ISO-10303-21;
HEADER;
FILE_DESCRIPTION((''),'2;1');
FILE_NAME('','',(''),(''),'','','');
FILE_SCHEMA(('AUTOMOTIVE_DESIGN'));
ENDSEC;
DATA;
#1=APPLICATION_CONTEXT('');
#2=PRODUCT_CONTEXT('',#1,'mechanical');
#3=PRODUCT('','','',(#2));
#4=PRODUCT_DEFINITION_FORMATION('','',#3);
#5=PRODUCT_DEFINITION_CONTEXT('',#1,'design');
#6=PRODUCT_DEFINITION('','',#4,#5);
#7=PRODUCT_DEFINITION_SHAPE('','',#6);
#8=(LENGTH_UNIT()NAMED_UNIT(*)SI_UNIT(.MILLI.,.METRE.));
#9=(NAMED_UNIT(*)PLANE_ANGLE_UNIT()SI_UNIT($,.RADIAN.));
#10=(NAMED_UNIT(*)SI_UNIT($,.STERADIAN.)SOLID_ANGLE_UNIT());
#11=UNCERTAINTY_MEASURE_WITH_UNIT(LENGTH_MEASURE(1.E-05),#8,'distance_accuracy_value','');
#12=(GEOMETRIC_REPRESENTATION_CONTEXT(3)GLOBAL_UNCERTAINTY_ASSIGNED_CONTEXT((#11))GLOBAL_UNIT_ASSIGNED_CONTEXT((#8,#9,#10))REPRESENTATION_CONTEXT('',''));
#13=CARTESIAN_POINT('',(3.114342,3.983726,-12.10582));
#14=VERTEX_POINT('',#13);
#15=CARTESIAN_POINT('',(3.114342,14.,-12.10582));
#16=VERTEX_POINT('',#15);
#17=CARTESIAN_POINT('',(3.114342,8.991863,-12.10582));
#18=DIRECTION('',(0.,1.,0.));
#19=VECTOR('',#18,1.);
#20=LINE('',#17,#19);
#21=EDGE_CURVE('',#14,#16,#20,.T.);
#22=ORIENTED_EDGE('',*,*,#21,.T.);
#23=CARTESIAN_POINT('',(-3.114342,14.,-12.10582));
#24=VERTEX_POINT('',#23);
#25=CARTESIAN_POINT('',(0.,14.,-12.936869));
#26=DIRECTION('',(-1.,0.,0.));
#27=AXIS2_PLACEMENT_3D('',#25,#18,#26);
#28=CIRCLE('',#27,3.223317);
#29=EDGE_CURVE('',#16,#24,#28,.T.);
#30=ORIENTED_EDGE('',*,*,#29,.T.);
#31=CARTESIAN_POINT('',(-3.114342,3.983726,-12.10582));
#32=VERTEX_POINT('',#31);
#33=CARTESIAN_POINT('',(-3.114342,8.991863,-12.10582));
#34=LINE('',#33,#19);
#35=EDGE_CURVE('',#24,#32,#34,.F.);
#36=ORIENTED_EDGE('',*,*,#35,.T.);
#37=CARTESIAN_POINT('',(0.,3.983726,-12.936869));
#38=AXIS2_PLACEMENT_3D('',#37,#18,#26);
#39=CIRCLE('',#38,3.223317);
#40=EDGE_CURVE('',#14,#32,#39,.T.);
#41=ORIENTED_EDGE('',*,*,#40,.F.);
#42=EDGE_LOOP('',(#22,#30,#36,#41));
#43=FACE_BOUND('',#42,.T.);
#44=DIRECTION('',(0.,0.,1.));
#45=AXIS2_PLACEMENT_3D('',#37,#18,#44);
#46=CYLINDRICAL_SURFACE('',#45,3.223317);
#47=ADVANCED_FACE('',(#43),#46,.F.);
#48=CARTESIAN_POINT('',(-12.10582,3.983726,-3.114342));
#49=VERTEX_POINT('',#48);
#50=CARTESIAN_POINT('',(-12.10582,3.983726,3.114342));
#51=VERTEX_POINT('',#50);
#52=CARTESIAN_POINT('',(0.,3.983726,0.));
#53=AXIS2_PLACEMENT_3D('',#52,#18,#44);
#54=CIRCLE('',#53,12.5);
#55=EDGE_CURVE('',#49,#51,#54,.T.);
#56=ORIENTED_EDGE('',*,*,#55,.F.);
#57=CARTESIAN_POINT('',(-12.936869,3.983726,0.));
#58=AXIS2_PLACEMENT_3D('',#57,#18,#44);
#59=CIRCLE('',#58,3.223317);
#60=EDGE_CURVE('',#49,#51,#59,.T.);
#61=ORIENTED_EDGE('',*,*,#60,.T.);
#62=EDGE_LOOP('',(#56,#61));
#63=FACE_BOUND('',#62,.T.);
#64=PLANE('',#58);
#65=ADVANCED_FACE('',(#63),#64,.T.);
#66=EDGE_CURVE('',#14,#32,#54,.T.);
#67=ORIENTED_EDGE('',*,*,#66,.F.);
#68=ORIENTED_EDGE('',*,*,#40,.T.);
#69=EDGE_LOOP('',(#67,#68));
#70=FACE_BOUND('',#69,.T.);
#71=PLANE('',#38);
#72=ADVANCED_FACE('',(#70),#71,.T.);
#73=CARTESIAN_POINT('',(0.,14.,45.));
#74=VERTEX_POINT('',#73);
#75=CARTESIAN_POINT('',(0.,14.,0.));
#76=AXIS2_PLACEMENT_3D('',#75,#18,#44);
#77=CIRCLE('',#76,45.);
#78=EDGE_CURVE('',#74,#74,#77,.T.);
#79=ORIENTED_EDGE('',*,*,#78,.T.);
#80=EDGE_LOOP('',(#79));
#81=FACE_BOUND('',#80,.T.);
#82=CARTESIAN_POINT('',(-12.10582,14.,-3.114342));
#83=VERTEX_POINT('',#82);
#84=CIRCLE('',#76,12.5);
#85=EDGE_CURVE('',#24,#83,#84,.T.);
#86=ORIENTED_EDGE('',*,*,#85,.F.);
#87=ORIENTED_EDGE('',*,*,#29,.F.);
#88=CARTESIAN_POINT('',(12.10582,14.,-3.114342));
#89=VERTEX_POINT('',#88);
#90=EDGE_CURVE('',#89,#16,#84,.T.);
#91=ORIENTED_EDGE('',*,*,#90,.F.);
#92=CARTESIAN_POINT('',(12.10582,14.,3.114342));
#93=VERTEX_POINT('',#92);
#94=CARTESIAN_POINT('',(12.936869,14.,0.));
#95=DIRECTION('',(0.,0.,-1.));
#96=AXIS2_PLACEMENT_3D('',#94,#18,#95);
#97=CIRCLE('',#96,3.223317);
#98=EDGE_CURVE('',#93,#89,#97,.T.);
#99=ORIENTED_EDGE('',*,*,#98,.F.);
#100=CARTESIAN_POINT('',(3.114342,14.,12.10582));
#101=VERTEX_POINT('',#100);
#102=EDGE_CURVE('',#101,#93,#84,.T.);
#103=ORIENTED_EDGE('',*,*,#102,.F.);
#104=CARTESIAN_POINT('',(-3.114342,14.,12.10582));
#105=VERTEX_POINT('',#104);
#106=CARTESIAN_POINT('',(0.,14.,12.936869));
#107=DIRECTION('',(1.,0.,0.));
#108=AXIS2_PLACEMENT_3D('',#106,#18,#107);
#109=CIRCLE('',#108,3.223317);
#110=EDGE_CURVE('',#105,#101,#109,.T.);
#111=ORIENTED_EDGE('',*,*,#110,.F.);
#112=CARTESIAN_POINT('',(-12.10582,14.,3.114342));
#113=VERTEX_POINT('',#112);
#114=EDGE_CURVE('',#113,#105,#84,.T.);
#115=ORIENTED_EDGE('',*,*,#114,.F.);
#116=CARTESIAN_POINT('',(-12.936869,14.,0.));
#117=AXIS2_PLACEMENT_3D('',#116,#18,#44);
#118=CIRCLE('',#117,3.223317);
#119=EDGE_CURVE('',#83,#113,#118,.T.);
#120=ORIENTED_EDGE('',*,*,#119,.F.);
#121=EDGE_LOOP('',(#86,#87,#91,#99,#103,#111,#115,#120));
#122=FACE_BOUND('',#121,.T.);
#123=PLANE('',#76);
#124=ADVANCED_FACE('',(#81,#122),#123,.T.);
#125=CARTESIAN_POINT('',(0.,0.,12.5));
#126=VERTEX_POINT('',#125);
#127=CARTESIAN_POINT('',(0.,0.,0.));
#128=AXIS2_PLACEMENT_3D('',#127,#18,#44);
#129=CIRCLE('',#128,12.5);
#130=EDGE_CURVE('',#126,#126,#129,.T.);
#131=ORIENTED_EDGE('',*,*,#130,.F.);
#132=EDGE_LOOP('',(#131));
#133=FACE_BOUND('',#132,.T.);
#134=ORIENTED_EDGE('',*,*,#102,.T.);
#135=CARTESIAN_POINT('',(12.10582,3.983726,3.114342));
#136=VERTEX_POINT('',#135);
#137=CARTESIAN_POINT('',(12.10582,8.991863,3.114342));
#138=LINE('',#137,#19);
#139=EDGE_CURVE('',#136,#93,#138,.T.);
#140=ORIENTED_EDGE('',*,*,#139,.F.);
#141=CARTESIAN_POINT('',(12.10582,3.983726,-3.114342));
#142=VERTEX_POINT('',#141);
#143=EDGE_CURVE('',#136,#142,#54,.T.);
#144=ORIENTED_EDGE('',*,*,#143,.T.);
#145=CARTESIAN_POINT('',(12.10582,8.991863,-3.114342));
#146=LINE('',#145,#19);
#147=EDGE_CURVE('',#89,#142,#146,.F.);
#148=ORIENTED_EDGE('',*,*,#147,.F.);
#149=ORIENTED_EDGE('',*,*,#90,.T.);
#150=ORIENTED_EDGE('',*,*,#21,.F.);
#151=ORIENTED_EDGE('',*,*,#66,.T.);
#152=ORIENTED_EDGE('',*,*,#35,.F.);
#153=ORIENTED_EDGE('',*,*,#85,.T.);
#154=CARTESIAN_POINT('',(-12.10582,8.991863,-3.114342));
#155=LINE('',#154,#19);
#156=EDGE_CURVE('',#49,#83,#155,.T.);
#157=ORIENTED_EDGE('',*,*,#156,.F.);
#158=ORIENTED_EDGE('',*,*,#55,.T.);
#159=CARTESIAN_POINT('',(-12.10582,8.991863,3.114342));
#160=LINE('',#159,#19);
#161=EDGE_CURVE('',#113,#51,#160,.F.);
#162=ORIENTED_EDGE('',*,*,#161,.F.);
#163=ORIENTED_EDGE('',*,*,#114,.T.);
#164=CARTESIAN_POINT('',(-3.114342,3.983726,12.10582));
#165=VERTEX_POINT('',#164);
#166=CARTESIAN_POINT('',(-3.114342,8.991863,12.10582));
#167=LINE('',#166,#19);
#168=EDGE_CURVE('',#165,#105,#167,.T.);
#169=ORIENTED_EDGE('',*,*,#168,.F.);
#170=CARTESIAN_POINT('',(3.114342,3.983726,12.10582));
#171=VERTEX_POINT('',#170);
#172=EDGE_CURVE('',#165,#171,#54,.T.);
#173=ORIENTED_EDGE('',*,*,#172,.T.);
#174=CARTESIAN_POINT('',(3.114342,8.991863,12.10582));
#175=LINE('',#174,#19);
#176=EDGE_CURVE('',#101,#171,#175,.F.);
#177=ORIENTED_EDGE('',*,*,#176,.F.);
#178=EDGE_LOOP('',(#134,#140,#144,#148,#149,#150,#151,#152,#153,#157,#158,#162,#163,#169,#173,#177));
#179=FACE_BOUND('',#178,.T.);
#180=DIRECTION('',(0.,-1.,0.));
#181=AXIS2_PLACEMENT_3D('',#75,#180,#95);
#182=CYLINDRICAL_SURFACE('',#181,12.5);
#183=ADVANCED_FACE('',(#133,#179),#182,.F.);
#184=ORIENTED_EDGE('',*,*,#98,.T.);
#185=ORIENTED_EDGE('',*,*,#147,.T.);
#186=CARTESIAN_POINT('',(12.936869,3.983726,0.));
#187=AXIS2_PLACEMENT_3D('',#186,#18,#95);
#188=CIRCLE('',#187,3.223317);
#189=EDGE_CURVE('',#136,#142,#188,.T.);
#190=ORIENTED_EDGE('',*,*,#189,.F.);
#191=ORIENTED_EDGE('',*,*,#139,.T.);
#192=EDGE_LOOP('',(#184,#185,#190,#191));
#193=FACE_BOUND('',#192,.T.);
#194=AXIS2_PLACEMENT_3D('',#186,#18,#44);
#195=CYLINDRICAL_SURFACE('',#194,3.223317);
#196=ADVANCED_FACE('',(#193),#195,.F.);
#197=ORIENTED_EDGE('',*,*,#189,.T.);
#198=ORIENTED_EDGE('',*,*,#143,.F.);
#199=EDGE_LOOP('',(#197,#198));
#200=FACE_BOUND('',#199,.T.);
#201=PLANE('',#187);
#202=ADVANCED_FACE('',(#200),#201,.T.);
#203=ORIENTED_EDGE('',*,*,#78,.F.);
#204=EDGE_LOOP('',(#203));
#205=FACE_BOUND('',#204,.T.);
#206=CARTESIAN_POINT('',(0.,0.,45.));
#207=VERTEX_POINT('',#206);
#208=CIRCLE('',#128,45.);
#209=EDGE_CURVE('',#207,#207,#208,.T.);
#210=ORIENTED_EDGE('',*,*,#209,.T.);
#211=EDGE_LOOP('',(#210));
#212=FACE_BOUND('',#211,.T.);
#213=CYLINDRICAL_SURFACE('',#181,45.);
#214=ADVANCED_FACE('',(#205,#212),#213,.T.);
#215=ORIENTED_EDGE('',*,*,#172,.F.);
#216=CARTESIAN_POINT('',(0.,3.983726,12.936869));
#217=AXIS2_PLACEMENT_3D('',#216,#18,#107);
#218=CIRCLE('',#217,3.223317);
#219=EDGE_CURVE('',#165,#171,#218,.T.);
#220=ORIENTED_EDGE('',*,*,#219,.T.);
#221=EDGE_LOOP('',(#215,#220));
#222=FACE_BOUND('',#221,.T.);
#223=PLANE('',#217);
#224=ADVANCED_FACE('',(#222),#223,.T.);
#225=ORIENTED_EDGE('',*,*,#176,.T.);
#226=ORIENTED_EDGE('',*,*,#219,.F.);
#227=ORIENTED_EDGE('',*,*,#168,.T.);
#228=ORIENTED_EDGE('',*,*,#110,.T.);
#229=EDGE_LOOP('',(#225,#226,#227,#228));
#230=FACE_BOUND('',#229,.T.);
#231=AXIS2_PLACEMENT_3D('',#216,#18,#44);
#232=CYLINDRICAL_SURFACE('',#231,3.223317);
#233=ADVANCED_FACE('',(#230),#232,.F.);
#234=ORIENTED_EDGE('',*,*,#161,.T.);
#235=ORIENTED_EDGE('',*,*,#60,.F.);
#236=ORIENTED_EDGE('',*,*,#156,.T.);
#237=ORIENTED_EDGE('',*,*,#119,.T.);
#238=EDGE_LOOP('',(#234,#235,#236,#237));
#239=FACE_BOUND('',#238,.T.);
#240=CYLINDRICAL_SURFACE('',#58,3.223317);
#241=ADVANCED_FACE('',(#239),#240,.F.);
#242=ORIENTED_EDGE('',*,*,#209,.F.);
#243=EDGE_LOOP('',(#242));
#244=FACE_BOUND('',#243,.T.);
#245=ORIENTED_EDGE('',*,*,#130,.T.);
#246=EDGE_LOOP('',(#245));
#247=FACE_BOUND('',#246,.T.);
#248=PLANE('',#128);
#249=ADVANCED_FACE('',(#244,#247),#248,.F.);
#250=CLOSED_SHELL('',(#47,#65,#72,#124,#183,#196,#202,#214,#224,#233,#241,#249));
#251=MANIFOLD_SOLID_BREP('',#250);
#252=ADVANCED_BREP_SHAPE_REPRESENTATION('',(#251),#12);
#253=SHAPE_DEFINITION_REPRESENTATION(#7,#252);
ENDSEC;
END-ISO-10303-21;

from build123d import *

# Parameters (mm, degrees)
SKETCH1_R           = 45
BOSS_EXTRUDE1_DEPTH = 14
SKETCH2_R           = 12.5
CUT_EXTRUDE1_DEPTH  = 66.161338231
SKETCH3_R           = 3.223316902
CUT_EXTRUDE2_DEPTH  = 10.016274352
CIRPATTERN1_COUNT   = 4


with BuildPart() as part:
    # Sketch1 → Boss-Extrude1 (new body)
    with BuildSketch(Plane(origin=(0, 0, 0), x_dir=(1, 0, 0), z_dir=(0, 1, 0))):
        Circle(SKETCH1_R)
    extrude(amount=BOSS_EXTRUDE1_DEPTH)

    # Sketch2 → Cut-Extrude1 (cut, through all)
    with BuildSketch(Plane(origin=(0, 0, 0), x_dir=(1, 0, 0), z_dir=(0, 1, 0))):
        Circle(SKETCH2_R)
    extrude(amount=CUT_EXTRUDE1_DEPTH, mode=Mode.SUBTRACT)

    # Sketch3 → Cut-Extrude2 (cut)
    with BuildSketch(Plane(origin=(0, 14, 0), x_dir=(1, 0, 0), z_dir=(0, 1, 0))):
        with Locations((-12.936869441, 0)):
            Circle(SKETCH3_R)
    cut_extrude2 = extrude(amount=-CUT_EXTRUDE2_DEPTH, mode=Mode.SUBTRACT)

    # CirPattern1: Cut-Extrude2 ×4 about axis
    cirpattern1_axis = Axis((0, 0, 0), (0, 1, 0))
    for i in range(1, CIRPATTERN1_COUNT):
        add(cut_extrude2.rotate(cirpattern1_axis, i * 360 / CIRPATTERN1_COUNT), mode=Mode.SUBTRACT)


solid = part.part
